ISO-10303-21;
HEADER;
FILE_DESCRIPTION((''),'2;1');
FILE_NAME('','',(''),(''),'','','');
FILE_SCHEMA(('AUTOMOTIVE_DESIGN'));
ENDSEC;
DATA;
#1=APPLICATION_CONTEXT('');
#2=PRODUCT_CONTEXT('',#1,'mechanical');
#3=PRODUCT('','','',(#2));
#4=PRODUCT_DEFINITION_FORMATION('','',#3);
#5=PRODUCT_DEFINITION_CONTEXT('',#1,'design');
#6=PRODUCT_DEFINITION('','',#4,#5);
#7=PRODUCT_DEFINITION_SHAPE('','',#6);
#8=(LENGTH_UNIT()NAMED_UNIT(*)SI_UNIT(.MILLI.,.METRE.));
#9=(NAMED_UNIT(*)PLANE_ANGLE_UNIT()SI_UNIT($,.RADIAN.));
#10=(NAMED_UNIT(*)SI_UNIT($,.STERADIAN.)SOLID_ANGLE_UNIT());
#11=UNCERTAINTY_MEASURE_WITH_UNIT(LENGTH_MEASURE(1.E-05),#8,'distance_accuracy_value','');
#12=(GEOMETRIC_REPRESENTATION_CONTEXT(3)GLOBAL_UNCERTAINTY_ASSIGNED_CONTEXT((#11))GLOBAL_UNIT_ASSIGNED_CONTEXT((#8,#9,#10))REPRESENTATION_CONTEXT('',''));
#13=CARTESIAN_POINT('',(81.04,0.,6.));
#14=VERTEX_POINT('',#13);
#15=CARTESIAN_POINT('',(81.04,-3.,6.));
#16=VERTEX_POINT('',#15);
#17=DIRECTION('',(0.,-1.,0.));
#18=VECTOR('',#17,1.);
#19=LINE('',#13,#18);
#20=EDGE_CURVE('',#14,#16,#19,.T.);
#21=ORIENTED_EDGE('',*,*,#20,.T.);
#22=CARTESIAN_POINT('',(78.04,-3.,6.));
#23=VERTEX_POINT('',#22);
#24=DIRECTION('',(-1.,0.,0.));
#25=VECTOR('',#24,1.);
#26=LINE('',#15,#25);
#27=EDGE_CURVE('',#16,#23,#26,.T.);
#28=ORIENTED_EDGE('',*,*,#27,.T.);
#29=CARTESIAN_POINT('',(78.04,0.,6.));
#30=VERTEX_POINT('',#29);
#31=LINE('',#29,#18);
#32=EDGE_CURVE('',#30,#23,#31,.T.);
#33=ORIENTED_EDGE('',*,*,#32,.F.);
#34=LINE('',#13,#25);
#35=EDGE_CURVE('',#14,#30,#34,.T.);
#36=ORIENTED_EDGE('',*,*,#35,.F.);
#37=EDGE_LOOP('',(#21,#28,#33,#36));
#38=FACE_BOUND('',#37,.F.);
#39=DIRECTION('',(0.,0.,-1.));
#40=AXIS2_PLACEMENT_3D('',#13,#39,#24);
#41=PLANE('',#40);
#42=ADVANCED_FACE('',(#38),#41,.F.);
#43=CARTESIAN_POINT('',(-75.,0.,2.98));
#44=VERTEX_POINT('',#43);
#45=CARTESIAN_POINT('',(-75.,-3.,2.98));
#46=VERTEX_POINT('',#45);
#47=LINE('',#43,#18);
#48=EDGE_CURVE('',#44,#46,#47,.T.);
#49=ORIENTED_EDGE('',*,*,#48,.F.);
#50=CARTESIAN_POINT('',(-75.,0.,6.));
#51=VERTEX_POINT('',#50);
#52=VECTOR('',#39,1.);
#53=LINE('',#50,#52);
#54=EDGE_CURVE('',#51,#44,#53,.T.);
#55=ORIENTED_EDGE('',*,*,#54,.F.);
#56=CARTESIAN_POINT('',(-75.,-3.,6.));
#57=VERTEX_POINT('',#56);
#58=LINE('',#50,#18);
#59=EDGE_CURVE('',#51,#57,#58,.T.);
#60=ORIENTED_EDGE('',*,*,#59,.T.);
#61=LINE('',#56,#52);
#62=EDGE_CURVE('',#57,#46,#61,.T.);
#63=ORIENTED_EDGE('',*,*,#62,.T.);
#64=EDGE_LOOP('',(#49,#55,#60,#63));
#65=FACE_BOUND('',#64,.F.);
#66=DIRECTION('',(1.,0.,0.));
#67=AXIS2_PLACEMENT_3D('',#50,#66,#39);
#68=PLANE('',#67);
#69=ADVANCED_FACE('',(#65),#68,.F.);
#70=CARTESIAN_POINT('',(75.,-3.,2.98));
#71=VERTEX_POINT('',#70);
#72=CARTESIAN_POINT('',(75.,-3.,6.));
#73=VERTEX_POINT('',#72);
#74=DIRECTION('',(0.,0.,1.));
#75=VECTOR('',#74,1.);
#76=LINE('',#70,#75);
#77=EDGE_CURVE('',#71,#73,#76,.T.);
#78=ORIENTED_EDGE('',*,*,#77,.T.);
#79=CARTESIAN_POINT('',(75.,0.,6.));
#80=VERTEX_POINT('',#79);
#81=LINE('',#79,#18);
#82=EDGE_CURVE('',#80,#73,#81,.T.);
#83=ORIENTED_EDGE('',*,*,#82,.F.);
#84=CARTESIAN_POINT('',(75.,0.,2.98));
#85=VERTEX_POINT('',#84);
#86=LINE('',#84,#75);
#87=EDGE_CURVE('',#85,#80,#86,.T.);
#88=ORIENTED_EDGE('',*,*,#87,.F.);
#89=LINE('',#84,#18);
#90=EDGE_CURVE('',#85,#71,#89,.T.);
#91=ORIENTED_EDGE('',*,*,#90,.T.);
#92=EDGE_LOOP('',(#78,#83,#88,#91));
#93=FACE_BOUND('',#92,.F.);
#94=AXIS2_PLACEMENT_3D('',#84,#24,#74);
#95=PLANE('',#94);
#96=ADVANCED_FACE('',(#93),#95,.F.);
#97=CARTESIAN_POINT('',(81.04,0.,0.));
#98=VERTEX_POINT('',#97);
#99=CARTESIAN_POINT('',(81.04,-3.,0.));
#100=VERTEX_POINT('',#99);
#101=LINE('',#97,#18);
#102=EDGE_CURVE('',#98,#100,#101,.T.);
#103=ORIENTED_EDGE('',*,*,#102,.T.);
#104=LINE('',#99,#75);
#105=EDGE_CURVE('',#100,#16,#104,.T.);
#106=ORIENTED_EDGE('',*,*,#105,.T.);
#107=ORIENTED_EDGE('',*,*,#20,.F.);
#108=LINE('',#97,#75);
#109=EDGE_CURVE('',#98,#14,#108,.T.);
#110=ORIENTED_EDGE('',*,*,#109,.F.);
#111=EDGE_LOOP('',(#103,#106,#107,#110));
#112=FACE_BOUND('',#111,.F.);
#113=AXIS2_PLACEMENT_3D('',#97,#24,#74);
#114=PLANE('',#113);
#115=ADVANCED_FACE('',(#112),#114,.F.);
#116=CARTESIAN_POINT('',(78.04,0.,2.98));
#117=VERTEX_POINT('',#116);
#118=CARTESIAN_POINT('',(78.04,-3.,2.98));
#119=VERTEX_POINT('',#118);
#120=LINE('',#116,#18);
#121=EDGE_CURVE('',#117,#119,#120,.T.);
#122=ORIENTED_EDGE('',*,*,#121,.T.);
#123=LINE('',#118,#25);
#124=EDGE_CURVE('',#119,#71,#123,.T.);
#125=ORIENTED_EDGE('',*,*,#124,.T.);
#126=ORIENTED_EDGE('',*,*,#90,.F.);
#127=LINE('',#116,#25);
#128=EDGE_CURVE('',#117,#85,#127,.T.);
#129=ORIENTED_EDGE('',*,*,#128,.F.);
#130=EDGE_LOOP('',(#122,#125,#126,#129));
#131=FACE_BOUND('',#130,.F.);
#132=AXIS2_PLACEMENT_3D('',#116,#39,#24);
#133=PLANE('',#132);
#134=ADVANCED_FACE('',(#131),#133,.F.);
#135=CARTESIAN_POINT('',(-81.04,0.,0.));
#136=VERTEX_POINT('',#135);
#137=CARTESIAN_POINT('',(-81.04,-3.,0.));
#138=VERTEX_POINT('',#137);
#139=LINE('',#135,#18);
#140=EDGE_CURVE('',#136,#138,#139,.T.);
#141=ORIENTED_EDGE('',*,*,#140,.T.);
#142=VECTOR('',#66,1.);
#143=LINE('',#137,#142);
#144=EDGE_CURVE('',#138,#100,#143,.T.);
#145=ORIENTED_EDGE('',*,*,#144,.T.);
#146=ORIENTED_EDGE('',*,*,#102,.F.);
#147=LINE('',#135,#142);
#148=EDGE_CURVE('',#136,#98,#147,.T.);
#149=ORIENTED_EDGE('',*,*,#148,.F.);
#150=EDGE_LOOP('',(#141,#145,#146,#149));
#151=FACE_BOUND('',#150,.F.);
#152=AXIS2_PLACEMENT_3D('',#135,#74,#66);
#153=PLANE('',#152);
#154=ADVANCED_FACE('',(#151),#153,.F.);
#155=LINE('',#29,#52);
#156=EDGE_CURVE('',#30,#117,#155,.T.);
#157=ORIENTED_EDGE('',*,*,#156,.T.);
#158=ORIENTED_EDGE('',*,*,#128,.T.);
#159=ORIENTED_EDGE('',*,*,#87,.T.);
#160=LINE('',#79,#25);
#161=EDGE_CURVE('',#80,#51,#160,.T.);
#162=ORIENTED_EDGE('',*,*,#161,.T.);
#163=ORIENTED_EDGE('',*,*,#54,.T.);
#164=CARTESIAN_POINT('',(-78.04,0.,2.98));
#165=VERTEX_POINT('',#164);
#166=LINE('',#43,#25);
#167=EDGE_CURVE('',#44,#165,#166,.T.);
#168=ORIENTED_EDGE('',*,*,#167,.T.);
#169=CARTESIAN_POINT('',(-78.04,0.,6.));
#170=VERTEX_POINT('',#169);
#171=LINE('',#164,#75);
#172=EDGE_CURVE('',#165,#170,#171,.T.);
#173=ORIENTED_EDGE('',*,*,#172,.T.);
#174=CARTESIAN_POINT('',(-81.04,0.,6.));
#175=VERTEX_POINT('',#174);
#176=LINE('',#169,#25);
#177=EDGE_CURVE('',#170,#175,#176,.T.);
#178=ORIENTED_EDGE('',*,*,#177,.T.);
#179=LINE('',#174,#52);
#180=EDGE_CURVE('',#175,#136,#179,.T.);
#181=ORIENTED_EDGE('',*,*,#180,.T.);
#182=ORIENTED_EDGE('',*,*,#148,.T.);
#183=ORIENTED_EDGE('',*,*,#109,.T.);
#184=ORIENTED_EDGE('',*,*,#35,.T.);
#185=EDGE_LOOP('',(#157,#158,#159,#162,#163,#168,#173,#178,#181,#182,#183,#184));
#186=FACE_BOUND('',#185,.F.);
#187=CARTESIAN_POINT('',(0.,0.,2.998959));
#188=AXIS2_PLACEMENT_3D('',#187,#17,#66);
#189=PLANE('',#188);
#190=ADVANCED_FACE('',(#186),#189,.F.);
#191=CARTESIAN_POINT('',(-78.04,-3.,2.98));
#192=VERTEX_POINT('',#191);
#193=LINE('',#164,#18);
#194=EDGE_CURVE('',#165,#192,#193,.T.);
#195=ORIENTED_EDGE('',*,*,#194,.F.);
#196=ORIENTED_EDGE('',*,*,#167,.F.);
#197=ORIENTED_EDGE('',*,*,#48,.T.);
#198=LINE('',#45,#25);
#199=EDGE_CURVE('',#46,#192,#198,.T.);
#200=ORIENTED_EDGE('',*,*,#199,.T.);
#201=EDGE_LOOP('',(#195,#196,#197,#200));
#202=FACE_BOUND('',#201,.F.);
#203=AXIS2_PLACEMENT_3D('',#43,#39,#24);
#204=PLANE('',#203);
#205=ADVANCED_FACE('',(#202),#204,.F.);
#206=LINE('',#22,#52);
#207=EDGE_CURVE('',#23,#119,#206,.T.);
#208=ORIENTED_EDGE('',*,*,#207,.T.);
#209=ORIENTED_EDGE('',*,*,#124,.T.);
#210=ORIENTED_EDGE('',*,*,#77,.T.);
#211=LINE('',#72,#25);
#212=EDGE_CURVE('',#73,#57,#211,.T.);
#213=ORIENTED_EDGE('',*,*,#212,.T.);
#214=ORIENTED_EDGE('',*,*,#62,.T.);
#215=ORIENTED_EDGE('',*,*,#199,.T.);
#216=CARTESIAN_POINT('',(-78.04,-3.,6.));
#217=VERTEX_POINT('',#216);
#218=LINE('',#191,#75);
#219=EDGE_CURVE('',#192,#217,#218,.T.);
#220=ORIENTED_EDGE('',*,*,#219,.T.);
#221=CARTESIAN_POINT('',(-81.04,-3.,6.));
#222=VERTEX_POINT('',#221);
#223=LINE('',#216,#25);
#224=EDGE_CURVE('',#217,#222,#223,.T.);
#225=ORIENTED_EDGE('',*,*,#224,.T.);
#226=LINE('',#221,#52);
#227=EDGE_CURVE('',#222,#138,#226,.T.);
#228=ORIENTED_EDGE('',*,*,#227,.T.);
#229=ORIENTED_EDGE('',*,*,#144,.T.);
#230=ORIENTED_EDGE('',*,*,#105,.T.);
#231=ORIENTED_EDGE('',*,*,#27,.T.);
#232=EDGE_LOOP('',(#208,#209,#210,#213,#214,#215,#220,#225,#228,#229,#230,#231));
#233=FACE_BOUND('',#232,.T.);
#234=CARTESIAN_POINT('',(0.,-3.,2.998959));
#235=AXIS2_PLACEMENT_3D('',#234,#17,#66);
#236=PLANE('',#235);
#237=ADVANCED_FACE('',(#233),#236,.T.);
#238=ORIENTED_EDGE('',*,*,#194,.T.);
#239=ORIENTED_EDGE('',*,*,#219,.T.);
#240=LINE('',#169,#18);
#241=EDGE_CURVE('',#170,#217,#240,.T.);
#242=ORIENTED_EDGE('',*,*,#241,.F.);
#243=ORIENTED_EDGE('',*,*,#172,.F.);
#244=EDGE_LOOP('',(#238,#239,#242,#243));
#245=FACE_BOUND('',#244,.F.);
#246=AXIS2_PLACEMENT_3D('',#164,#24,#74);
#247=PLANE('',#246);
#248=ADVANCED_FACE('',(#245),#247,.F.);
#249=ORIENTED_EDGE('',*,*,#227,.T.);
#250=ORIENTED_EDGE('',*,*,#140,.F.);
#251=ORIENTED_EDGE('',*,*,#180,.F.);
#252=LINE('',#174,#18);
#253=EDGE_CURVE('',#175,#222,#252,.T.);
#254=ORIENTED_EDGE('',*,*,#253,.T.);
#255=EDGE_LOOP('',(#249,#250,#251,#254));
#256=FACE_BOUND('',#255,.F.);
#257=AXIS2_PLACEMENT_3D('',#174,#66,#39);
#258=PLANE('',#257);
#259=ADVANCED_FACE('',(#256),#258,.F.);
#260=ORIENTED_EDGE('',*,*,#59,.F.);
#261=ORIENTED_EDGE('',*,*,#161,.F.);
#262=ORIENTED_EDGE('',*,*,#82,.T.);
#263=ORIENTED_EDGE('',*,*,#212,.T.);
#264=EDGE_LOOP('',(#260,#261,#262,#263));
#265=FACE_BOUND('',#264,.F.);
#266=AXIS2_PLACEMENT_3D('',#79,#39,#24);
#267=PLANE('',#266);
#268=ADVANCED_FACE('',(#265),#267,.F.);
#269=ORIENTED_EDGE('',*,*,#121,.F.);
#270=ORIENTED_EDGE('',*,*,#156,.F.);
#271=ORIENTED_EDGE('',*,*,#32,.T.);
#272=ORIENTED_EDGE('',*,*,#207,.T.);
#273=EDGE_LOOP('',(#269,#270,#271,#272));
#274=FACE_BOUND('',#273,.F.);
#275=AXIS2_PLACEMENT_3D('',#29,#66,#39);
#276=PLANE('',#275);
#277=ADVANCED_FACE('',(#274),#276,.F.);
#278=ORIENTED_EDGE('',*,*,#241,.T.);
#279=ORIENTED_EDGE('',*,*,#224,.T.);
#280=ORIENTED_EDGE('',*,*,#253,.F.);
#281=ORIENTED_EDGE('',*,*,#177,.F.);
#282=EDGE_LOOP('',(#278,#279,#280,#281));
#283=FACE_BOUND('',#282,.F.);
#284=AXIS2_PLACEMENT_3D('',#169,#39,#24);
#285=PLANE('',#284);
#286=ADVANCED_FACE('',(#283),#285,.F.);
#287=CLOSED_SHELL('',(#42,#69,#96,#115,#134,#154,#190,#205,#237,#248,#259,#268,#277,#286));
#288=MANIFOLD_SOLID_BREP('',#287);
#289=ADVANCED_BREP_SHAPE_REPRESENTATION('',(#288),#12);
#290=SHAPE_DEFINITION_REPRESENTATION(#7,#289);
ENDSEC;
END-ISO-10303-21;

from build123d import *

# Parameters (mm, degrees)
F1_DEPTH = 3


# Not quite as in the source:
# - a feature names something its author has since deleted; it is built from what else it names


with BuildPart() as f1:
    # F0 (on Front) → F1 (new body)
    with BuildSketch(Plane.XZ):
        Polygon((-81.04, 6), (-81.04, 0), (81.04, 0), (81.04, 6), (78.04, 6), (78.04, 2.98), (75, 2.98), (75, 6), (-75, 6), (-75, 2.98), (-78.04, 2.98), (-78.04, 6), align=None)
    extrude(amount=F1_DEPTH)


solid = f1.part
